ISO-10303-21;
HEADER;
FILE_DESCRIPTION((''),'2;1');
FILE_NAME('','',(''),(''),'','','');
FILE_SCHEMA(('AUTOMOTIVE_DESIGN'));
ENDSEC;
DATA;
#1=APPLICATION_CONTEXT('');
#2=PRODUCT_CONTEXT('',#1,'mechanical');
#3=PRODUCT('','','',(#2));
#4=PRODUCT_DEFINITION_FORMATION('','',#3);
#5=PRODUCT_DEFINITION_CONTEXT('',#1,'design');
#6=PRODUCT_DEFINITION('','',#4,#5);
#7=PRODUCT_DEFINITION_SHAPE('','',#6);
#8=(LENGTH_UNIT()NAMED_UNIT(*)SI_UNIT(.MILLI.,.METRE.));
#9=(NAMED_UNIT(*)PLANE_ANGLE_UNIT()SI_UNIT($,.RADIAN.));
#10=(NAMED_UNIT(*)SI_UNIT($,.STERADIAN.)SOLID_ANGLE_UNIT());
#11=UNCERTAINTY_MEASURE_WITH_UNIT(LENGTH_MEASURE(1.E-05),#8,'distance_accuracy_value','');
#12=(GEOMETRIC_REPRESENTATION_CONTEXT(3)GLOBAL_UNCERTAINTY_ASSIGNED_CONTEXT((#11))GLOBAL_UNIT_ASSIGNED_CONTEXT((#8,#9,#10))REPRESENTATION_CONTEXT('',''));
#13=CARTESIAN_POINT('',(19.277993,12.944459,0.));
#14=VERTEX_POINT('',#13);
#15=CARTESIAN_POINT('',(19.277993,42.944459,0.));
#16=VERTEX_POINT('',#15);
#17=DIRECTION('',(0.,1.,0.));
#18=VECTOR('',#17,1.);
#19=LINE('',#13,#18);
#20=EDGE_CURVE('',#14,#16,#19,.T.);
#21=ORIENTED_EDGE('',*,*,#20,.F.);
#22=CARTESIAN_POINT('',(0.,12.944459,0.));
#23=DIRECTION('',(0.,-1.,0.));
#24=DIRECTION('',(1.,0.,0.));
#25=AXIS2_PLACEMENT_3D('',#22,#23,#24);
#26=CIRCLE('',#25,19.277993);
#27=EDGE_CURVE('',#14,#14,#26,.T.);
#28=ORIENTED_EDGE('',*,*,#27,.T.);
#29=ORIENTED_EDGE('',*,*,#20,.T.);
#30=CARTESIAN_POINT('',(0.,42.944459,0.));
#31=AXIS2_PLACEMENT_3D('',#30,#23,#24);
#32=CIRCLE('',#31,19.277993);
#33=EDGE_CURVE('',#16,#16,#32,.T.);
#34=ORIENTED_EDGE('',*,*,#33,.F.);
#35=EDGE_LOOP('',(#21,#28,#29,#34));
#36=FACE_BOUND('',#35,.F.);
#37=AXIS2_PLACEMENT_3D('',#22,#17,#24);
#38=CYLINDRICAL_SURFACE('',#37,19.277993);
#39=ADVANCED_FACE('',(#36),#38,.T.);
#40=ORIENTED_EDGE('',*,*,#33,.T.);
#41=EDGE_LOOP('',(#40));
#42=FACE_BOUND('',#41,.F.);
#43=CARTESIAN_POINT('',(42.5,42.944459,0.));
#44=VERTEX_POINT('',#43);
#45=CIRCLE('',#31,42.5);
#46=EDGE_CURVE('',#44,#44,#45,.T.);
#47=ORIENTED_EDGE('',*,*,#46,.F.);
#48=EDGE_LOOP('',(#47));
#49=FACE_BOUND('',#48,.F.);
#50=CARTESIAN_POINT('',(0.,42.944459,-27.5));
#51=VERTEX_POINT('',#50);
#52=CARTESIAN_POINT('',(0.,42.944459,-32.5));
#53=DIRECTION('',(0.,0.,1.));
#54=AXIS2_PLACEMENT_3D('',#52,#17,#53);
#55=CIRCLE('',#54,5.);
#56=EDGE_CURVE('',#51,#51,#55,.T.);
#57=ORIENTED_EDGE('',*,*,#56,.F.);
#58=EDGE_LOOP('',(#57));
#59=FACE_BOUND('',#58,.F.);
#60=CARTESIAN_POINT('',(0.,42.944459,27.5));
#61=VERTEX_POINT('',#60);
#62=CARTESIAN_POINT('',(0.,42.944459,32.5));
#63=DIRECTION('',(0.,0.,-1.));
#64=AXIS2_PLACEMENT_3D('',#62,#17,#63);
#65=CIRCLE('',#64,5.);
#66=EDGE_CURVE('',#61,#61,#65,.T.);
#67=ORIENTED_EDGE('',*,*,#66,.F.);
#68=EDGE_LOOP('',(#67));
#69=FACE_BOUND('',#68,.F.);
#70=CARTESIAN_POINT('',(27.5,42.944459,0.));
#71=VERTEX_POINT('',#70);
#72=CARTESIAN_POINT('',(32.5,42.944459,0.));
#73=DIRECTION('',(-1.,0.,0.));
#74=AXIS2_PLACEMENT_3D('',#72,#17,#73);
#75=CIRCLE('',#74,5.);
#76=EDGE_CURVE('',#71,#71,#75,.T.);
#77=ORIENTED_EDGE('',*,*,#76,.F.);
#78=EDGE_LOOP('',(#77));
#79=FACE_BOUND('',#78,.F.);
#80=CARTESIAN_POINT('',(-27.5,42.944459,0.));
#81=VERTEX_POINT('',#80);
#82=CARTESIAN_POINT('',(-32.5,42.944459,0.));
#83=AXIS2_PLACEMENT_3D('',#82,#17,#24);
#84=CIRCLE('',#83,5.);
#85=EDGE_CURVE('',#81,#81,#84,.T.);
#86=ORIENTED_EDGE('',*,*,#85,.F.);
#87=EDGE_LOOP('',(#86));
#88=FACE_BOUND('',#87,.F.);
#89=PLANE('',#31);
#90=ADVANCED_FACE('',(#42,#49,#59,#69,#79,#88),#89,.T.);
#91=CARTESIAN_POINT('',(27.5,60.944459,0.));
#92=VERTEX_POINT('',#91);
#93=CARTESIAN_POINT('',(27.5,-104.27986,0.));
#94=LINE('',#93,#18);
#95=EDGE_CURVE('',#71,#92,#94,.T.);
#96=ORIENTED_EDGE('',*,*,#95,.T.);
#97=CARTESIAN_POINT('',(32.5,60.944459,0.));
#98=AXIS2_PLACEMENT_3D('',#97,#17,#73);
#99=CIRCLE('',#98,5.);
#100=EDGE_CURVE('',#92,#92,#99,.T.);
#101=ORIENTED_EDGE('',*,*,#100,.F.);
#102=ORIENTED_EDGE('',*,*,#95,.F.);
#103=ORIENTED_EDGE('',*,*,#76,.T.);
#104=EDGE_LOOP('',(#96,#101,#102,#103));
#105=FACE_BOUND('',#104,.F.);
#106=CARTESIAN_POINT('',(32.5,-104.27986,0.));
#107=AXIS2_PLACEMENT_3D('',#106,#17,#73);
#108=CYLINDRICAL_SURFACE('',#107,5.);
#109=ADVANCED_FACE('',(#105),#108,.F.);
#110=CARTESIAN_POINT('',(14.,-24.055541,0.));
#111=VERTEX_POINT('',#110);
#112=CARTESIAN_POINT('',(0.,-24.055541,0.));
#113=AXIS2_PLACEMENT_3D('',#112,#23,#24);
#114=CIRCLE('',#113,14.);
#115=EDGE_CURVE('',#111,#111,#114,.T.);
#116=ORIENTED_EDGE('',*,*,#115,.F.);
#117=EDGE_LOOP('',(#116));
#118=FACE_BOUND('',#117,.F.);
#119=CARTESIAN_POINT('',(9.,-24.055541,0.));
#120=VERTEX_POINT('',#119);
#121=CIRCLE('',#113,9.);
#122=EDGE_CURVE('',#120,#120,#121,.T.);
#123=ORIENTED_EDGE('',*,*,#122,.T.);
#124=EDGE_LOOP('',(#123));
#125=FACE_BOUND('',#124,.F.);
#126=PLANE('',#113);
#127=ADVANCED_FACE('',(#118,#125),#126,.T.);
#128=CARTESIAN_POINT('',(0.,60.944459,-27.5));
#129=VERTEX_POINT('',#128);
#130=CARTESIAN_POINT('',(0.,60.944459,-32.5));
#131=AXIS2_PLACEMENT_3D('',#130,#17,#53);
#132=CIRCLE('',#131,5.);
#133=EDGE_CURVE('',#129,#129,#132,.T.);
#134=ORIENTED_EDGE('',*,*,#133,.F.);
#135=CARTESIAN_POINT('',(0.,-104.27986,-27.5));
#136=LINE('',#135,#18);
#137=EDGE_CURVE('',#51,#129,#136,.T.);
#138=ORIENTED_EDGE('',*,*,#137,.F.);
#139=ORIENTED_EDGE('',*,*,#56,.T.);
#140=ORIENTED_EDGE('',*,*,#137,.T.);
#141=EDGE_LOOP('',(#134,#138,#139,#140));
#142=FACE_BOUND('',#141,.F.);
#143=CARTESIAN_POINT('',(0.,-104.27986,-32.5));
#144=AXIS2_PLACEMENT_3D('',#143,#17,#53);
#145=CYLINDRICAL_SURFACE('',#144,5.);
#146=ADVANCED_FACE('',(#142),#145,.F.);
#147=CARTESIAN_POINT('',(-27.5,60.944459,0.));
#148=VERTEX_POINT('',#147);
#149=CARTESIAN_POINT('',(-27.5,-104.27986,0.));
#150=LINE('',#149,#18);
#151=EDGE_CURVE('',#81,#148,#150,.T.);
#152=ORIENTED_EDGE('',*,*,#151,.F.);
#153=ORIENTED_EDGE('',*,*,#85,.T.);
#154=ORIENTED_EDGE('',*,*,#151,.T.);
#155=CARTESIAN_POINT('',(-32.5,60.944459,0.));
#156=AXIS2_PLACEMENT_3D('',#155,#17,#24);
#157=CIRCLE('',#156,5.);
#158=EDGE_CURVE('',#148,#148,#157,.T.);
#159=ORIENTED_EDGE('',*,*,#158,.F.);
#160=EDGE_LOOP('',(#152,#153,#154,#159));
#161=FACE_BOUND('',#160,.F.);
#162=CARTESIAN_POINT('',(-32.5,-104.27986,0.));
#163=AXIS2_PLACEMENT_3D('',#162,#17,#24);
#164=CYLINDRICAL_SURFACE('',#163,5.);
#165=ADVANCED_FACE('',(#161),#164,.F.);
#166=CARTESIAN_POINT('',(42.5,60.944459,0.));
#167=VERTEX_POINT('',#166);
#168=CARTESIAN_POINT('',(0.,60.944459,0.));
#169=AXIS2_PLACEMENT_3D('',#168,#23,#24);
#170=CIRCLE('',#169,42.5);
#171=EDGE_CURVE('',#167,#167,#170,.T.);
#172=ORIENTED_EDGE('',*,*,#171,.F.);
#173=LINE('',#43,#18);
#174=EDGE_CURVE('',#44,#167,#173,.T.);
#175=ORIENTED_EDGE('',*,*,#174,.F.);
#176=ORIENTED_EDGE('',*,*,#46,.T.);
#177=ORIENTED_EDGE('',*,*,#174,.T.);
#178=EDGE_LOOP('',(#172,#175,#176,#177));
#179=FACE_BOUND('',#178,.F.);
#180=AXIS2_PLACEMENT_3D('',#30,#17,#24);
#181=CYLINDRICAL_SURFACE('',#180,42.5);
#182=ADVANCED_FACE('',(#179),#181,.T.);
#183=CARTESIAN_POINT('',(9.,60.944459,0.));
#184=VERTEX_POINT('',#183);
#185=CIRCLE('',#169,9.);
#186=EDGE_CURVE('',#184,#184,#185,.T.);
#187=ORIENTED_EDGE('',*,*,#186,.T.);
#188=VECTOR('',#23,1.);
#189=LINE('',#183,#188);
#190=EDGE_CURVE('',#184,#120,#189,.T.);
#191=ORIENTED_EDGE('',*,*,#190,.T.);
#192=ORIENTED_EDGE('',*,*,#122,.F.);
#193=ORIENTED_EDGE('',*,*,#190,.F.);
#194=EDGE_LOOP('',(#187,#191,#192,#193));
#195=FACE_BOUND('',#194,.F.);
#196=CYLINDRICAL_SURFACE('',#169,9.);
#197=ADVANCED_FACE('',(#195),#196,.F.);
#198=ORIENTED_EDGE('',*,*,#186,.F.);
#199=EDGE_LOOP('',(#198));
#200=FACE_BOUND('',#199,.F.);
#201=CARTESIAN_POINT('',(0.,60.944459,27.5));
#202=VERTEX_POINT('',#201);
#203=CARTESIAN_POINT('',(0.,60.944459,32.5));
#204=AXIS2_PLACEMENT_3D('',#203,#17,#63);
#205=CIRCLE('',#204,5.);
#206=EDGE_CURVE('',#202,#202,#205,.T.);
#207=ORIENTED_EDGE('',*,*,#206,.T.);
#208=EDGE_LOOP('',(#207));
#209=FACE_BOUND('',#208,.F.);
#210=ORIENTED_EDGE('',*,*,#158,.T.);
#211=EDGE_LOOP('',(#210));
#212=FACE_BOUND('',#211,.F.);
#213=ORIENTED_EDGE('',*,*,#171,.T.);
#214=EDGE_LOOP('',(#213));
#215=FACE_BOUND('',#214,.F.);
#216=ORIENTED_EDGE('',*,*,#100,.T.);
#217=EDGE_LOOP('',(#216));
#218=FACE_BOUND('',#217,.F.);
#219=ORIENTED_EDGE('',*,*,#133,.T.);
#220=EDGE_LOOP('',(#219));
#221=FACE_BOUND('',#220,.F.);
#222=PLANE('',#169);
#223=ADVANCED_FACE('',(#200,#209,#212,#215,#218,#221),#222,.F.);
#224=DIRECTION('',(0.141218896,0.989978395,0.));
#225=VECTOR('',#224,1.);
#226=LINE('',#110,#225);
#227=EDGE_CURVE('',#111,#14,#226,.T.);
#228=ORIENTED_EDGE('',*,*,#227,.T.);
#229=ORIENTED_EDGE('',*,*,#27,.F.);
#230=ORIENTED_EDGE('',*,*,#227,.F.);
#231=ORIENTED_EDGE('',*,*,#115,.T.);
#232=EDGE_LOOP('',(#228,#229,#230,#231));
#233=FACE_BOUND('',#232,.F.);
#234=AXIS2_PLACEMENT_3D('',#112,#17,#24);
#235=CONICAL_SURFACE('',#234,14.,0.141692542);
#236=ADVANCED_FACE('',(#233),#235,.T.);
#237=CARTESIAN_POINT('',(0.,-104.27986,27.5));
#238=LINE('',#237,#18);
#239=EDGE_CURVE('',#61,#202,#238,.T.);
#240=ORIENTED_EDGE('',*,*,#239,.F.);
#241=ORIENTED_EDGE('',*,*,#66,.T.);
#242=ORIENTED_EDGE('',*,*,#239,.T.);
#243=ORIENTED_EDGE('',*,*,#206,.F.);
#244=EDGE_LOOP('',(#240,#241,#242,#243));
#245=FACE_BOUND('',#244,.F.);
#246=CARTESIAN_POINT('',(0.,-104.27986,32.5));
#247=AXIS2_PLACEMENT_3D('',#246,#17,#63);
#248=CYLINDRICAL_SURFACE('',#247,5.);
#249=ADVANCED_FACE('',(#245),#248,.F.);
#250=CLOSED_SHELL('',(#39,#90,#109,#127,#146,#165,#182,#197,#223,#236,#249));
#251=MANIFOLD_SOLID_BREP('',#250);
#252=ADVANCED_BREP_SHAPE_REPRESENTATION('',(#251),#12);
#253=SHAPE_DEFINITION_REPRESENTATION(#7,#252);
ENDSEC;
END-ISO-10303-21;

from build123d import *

# Parameters (mm, degrees)
F3_D            = 10
F3_COPIES_COUNT = 4


# Not quite as in the source:
# - a pattern or mirror of a feature is missing from the dataset's text; its kind, count and spacing are read off the source's solid


with BuildPart() as f1:
    # F0 (on Top) → F1 (revolve)
    with BuildSketch(Plane.XY):
        Polygon((42.5, 60.944458911), (9, 60.944458911), (9, -24.055541089), (14, -24.055541089), (19.277993122, 12.944458911), (19.277993122, 42.944458911), (42.5, 42.944458911), align=None)
    revolve(axis=Axis((0, 17.8779862242, 0), (0, -1, 0)))

    # F3 (through all)
    with Locations(Plane.XZ.offset(-42.944458911)):
        with Locations((32.5, 0)):
            f3 = Hole(F3_D / 2)

    # F3_copies: F3 ×4 about axis
    f3_copies_axis = Axis((0, 0, 0), (0, 1, 0))
    for i in range(1, F3_COPIES_COUNT):
        add(f3.rotate(f3_copies_axis, i * 360 / F3_COPIES_COUNT), mode=Mode.SUBTRACT)


solid = f1.part
